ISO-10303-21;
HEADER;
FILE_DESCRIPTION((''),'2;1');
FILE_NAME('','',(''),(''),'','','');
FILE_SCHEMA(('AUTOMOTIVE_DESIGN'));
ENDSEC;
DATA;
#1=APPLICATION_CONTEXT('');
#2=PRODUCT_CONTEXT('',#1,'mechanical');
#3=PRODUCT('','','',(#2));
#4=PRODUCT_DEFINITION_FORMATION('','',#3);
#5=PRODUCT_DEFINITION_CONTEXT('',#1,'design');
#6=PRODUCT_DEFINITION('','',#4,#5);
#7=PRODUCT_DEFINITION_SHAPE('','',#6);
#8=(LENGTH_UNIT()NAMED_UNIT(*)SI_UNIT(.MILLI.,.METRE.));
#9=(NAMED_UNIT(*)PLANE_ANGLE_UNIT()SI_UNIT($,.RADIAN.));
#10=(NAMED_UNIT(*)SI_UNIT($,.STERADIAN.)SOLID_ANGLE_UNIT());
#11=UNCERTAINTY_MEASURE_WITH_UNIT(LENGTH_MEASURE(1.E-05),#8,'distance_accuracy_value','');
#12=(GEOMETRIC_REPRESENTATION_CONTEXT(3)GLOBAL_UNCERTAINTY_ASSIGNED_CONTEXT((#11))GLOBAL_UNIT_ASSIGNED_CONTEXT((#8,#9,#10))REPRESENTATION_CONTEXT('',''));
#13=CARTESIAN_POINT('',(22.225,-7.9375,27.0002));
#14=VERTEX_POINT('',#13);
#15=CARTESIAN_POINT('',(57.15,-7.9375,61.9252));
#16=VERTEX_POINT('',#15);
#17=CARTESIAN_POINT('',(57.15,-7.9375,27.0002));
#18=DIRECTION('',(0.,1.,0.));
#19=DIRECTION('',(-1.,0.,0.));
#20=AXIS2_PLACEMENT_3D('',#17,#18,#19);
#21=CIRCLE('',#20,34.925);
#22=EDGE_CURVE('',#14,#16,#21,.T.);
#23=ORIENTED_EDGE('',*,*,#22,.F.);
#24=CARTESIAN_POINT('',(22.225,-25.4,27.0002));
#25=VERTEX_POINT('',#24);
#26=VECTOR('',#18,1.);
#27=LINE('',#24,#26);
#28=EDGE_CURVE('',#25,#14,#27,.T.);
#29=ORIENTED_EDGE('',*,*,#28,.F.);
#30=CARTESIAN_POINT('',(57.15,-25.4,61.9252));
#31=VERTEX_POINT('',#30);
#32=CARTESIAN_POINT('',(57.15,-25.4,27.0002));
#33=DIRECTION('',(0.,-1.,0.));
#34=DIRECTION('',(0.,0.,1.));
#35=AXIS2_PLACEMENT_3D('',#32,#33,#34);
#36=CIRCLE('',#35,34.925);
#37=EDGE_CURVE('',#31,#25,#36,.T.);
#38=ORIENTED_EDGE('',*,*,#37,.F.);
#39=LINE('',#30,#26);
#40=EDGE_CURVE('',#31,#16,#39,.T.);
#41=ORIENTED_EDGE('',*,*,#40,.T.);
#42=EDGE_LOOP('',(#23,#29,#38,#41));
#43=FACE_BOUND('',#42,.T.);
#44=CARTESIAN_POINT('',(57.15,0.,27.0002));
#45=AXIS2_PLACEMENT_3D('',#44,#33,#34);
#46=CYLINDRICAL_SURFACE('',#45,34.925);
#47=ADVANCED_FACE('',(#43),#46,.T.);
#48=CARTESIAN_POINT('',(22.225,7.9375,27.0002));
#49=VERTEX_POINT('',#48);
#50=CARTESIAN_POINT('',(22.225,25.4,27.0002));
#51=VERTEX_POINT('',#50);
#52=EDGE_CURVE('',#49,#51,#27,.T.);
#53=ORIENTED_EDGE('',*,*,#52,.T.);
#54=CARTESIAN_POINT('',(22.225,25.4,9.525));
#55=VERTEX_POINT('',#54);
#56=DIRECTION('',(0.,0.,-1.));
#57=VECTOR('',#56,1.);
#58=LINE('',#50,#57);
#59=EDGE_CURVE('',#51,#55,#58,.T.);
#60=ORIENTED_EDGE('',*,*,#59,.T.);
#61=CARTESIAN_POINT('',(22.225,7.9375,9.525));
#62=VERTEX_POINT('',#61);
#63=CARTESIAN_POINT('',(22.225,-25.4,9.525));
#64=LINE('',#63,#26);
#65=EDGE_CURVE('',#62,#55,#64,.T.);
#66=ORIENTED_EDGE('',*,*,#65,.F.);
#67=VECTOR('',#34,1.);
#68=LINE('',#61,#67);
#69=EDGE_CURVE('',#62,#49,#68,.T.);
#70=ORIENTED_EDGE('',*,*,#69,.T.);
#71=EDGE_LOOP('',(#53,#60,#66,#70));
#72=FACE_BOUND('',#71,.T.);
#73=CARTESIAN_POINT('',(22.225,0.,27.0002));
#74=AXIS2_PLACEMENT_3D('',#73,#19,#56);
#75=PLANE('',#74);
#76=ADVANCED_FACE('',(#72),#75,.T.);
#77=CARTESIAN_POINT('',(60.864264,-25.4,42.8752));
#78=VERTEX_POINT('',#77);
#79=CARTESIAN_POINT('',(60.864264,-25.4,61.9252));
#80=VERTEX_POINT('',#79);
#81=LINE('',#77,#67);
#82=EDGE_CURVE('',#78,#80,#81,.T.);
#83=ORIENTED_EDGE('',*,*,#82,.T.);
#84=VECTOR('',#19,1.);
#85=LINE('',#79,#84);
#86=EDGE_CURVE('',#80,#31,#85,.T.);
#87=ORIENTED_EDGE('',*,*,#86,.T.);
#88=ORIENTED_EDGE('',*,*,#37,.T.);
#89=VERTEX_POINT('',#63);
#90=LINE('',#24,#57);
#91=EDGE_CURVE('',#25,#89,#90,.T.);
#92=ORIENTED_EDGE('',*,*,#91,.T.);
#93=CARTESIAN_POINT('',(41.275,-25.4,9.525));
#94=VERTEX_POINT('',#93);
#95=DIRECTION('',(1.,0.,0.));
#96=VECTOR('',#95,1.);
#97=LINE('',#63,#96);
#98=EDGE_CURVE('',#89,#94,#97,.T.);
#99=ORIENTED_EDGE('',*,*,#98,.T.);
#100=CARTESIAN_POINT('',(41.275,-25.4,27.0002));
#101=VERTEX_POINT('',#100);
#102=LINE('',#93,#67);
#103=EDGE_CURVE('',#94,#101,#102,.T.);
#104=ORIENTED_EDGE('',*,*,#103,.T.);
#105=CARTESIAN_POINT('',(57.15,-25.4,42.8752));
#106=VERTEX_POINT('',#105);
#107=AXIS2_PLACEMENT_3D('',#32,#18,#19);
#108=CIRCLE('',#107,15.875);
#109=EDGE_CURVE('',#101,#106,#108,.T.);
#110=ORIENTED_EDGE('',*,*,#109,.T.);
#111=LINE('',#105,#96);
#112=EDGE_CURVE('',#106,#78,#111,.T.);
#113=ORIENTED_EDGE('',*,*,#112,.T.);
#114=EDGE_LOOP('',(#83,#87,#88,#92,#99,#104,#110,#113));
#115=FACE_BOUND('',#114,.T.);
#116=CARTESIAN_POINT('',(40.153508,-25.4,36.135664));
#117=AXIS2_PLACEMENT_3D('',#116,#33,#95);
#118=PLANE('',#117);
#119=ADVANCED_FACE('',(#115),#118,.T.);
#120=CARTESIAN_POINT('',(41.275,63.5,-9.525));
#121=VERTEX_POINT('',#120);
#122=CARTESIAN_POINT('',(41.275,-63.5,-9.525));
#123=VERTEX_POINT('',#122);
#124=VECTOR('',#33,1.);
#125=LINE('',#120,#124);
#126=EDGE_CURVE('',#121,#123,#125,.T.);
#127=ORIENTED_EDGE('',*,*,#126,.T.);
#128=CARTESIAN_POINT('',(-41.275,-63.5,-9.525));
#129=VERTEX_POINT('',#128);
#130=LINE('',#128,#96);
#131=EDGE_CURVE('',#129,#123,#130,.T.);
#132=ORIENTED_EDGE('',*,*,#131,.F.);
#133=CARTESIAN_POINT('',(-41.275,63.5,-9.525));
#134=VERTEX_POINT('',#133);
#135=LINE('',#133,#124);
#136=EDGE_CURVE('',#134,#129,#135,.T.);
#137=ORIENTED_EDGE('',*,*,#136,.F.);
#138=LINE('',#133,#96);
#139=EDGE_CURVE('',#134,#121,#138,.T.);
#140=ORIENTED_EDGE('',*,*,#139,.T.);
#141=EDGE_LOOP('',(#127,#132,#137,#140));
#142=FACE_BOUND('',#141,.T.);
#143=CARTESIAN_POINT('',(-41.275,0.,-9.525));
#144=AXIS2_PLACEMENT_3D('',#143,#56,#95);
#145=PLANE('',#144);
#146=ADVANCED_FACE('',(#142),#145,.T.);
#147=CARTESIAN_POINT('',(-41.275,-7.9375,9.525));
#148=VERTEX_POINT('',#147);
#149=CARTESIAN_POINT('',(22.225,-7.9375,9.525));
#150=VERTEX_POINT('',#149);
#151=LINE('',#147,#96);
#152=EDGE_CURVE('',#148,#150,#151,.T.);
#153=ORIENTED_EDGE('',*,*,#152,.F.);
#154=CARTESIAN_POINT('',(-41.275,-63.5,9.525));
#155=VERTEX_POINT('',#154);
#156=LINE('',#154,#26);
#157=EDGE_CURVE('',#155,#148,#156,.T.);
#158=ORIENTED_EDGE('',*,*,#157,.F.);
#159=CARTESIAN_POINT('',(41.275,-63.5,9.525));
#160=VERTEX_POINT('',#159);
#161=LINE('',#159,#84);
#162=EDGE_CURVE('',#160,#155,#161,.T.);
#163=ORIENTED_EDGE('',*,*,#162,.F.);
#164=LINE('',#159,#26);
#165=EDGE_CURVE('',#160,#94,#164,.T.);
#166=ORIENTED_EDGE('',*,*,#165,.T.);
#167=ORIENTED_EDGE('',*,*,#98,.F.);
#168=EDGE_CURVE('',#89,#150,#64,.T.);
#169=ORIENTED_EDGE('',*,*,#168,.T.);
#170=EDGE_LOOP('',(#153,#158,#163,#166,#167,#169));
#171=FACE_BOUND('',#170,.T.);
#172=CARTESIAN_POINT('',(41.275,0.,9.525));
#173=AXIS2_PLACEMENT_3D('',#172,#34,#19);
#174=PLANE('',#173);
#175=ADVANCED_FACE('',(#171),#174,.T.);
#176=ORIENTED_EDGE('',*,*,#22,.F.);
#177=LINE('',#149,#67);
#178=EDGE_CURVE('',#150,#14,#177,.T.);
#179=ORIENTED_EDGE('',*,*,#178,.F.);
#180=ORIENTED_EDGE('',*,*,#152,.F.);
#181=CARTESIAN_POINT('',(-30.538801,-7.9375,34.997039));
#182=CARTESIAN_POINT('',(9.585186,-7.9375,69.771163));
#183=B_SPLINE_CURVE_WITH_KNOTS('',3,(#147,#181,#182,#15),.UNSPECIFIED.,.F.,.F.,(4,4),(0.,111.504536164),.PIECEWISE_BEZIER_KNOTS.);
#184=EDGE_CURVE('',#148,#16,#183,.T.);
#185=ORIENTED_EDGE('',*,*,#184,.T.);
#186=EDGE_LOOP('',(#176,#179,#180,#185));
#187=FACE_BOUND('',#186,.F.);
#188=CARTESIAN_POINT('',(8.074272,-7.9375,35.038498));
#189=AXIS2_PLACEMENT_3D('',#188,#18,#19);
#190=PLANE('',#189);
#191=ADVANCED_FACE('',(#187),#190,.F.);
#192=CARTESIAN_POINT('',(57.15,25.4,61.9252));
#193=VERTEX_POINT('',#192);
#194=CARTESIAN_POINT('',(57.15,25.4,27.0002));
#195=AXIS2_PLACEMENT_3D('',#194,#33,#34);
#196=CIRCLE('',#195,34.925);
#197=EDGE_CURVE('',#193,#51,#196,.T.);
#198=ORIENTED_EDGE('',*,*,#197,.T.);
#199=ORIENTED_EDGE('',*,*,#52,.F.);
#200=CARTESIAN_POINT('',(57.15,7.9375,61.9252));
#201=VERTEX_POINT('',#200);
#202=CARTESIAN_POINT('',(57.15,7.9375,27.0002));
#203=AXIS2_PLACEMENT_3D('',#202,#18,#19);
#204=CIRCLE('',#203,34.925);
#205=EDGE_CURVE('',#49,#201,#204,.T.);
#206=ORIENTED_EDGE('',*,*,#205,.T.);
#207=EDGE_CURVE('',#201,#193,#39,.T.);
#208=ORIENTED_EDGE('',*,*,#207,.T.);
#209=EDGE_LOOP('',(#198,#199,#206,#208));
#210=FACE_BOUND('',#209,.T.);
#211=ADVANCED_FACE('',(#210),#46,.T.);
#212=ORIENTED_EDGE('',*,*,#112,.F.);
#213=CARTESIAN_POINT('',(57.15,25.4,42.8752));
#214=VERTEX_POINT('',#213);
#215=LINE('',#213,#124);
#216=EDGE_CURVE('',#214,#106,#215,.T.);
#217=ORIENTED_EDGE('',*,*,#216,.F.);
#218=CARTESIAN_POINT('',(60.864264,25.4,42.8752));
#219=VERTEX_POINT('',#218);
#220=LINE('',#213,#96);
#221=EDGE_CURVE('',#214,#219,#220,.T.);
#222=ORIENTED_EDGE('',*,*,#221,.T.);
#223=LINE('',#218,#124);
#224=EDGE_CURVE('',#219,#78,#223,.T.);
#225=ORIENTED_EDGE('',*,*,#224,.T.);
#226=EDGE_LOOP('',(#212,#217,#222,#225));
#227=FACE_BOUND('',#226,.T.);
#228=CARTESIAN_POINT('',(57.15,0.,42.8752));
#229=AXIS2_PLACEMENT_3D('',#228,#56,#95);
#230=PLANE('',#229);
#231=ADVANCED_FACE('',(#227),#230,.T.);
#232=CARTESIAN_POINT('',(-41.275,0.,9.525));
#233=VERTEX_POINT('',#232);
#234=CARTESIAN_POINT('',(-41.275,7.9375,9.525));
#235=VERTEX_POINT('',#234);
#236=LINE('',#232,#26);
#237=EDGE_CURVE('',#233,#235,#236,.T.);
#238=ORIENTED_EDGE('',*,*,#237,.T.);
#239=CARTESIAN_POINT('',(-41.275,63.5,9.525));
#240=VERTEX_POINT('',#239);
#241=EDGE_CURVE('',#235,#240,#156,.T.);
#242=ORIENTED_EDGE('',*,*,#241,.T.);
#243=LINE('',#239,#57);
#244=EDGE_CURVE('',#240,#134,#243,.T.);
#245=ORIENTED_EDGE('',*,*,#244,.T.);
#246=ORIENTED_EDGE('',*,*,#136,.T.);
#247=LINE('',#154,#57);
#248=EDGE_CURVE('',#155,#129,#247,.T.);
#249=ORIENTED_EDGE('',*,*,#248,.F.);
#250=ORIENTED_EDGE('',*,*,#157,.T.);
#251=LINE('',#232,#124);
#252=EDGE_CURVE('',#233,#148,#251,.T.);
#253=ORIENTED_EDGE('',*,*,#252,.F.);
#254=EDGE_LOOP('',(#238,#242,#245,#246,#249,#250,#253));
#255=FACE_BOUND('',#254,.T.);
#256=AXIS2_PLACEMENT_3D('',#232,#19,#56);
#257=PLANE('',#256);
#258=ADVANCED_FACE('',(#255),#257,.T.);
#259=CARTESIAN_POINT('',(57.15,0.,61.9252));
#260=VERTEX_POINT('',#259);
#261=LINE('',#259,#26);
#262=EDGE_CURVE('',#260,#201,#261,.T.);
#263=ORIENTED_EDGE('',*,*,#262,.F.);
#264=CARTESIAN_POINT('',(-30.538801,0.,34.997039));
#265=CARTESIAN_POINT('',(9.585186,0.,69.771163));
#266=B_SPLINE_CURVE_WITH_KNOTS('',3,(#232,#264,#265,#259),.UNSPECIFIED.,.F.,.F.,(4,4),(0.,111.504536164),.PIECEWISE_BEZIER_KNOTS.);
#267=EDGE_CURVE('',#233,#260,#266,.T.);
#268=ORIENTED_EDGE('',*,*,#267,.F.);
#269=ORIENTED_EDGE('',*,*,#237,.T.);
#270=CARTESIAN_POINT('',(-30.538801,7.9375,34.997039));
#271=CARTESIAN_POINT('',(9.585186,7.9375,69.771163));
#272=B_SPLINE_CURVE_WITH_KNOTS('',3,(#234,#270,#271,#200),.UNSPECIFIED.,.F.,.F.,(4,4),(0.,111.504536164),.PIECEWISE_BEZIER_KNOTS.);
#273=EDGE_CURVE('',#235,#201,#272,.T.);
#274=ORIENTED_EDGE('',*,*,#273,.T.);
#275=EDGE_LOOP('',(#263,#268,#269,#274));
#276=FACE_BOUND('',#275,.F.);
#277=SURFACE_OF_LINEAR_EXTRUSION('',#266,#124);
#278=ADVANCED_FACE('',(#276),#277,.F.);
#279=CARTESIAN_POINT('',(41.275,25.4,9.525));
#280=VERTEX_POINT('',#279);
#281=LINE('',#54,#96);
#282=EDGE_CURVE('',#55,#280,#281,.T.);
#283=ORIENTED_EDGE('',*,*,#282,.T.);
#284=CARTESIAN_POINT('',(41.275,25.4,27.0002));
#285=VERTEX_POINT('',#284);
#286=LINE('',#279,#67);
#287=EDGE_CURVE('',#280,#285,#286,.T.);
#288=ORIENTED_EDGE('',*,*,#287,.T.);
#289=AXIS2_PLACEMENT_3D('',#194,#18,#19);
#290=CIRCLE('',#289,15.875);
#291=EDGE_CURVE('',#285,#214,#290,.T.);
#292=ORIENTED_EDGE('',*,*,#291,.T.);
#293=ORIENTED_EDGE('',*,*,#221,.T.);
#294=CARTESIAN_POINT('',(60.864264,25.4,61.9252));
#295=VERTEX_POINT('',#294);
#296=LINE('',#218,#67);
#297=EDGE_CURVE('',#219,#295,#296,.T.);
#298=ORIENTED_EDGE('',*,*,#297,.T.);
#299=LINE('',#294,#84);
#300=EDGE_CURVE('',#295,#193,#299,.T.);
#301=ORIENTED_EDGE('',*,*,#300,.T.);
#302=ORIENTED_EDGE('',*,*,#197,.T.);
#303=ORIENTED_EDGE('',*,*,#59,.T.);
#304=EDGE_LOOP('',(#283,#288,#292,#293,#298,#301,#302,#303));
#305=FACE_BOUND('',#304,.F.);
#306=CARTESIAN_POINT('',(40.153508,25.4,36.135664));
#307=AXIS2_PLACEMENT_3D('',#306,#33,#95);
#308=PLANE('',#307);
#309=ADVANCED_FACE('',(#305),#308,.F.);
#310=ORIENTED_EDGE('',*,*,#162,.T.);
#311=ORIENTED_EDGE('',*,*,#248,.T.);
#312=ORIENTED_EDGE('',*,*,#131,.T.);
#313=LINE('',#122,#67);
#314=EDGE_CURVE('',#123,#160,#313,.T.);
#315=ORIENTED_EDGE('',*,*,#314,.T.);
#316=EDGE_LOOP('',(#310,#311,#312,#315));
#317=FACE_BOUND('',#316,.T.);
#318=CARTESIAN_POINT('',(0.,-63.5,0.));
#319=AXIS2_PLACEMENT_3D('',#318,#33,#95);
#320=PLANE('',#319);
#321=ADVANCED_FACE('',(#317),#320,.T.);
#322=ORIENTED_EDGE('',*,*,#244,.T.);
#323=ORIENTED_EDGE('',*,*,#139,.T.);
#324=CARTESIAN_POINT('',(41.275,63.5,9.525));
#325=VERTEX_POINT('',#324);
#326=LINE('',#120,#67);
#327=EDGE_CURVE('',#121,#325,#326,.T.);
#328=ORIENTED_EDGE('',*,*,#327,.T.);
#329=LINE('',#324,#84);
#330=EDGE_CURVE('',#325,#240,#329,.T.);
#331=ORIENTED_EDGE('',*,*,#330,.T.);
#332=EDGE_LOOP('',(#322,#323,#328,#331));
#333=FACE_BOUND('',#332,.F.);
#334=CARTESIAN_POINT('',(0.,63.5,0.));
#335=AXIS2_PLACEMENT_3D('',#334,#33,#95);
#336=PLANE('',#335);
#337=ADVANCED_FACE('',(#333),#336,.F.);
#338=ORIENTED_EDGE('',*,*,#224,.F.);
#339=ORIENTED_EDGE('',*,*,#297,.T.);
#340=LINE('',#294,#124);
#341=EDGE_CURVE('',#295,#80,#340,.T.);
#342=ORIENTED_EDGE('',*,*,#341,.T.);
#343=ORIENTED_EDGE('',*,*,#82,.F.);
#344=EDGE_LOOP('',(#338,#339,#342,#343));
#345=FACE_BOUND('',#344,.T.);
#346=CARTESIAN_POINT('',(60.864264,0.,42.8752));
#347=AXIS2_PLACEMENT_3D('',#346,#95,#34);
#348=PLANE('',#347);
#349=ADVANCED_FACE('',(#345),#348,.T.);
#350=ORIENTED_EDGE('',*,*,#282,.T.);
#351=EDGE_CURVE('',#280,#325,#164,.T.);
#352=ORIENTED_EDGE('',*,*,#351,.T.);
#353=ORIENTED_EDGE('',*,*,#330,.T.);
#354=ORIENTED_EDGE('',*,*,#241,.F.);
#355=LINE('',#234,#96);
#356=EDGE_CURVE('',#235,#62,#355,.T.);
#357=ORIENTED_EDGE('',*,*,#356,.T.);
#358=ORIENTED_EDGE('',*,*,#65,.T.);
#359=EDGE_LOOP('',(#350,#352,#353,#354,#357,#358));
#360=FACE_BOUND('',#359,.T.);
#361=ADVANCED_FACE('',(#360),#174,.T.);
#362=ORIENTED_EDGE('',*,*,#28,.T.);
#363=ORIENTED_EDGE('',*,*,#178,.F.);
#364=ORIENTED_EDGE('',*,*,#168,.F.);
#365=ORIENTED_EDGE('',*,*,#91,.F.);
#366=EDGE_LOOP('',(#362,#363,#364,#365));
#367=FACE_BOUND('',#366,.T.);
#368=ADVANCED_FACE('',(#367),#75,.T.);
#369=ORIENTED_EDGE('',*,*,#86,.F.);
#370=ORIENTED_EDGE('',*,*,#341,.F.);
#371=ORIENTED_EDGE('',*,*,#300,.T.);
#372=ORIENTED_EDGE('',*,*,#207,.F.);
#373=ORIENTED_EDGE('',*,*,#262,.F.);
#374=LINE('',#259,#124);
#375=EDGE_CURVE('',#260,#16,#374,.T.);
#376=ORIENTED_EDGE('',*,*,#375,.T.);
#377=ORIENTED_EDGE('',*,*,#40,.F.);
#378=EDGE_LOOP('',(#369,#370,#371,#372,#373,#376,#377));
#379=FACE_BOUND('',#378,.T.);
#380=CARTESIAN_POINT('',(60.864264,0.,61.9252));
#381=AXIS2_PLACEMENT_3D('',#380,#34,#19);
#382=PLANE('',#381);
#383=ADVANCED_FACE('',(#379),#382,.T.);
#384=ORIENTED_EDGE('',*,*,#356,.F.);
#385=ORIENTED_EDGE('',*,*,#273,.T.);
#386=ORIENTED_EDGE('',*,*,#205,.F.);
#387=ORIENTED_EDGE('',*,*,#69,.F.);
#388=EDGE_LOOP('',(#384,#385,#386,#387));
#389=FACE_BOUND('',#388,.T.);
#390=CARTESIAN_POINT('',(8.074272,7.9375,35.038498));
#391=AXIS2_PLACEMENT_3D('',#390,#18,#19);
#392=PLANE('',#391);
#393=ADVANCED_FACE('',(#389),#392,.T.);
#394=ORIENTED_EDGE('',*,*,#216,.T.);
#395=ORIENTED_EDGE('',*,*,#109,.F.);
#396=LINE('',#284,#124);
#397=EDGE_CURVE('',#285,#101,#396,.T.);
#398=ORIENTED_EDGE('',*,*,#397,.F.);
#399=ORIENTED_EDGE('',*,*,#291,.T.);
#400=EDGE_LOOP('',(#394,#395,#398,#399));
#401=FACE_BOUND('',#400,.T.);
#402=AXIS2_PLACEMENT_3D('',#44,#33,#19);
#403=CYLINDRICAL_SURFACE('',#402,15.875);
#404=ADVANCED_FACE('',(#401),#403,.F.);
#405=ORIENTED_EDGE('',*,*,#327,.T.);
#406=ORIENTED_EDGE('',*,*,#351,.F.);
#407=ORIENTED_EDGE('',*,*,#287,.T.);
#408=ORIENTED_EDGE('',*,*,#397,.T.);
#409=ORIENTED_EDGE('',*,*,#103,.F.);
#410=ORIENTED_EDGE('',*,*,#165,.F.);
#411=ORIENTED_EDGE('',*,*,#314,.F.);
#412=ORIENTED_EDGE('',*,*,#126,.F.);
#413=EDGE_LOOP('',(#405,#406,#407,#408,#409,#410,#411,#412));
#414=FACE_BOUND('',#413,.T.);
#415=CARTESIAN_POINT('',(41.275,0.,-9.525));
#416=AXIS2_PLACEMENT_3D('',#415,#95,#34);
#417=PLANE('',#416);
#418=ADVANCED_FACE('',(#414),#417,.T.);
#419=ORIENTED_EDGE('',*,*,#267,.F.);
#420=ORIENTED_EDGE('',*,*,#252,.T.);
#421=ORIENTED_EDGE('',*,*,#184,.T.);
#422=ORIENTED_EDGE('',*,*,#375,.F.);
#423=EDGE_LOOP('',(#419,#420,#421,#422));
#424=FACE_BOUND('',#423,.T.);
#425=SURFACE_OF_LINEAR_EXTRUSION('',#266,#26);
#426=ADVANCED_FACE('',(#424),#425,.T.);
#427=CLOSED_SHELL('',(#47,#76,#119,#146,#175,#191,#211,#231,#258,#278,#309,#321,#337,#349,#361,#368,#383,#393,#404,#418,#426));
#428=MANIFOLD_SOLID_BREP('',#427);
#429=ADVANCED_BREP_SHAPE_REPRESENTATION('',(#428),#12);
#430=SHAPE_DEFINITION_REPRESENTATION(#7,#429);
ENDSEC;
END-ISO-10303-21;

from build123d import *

# Parameters (mm, degrees)
F1_DEPTH = 63.5
F2_DEPTH = 25.4
F3_DEPTH = 7.9375


with BuildPart() as f1:
    # F0 (on Front) → F1 (new body, symmetric)
    with BuildSketch(Plane.XZ):
        Polygon((-41.275, 9.525), (-41.275, -9.525), (41.275, -9.525), (41.275, 9.525), (22.225, 9.525), align=None)
    extrude(amount=F1_DEPTH, both=True)

    # F0 (on Front) → F2 (join, symmetric)
    with BuildSketch(Plane.XZ):
        with BuildLine():
            Line((22.225, 9.525), (41.275, 9.525))
            Line((41.275, 9.525), (41.275, 27.0002))
            ThreePointArc((41.275, 27.0002), (45.9246798487, 38.2255201513), (57.15, 42.8752))
            Line((57.15, 42.8752), (60.8642640084, 42.8752))
            Line((60.8642640084, 42.8752), (60.8642640084, 61.9252))
            Line((60.8642640084, 61.9252), (57.15, 61.9252))
            ThreePointArc((57.15, 61.9252), (32.4542956671, 51.6959043329), (22.225, 27.0002))
            Line((22.225, 27.0002), (22.225, 9.525))
        make_face()
    extrude(amount=F2_DEPTH, both=True)

    # F0 (on Front) → F3 (join, symmetric)
    with BuildSketch(Plane.XZ):
        with BuildLine():
            add(Edge.make_bspline(
                [(-41.275, 9.525), (-30.5388011038, 34.9970385432), (9.5851859078, 69.7711631656), (57.15, 61.9252)],
                knots=[0, 0, 0, 0, 111.5045361635, 111.5045361635, 111.5045361635, 111.5045361635], degree=3))
            Line((-41.275, 9.525), (22.225, 9.525))
            Line((22.225, 9.525), (22.225, 27.0002))
            ThreePointArc((22.225, 27.0002), (32.4542956671, 51.6959043329), (57.15, 61.9252))
        make_face()
    extrude(amount=F3_DEPTH, both=True)


solid = f1.part
